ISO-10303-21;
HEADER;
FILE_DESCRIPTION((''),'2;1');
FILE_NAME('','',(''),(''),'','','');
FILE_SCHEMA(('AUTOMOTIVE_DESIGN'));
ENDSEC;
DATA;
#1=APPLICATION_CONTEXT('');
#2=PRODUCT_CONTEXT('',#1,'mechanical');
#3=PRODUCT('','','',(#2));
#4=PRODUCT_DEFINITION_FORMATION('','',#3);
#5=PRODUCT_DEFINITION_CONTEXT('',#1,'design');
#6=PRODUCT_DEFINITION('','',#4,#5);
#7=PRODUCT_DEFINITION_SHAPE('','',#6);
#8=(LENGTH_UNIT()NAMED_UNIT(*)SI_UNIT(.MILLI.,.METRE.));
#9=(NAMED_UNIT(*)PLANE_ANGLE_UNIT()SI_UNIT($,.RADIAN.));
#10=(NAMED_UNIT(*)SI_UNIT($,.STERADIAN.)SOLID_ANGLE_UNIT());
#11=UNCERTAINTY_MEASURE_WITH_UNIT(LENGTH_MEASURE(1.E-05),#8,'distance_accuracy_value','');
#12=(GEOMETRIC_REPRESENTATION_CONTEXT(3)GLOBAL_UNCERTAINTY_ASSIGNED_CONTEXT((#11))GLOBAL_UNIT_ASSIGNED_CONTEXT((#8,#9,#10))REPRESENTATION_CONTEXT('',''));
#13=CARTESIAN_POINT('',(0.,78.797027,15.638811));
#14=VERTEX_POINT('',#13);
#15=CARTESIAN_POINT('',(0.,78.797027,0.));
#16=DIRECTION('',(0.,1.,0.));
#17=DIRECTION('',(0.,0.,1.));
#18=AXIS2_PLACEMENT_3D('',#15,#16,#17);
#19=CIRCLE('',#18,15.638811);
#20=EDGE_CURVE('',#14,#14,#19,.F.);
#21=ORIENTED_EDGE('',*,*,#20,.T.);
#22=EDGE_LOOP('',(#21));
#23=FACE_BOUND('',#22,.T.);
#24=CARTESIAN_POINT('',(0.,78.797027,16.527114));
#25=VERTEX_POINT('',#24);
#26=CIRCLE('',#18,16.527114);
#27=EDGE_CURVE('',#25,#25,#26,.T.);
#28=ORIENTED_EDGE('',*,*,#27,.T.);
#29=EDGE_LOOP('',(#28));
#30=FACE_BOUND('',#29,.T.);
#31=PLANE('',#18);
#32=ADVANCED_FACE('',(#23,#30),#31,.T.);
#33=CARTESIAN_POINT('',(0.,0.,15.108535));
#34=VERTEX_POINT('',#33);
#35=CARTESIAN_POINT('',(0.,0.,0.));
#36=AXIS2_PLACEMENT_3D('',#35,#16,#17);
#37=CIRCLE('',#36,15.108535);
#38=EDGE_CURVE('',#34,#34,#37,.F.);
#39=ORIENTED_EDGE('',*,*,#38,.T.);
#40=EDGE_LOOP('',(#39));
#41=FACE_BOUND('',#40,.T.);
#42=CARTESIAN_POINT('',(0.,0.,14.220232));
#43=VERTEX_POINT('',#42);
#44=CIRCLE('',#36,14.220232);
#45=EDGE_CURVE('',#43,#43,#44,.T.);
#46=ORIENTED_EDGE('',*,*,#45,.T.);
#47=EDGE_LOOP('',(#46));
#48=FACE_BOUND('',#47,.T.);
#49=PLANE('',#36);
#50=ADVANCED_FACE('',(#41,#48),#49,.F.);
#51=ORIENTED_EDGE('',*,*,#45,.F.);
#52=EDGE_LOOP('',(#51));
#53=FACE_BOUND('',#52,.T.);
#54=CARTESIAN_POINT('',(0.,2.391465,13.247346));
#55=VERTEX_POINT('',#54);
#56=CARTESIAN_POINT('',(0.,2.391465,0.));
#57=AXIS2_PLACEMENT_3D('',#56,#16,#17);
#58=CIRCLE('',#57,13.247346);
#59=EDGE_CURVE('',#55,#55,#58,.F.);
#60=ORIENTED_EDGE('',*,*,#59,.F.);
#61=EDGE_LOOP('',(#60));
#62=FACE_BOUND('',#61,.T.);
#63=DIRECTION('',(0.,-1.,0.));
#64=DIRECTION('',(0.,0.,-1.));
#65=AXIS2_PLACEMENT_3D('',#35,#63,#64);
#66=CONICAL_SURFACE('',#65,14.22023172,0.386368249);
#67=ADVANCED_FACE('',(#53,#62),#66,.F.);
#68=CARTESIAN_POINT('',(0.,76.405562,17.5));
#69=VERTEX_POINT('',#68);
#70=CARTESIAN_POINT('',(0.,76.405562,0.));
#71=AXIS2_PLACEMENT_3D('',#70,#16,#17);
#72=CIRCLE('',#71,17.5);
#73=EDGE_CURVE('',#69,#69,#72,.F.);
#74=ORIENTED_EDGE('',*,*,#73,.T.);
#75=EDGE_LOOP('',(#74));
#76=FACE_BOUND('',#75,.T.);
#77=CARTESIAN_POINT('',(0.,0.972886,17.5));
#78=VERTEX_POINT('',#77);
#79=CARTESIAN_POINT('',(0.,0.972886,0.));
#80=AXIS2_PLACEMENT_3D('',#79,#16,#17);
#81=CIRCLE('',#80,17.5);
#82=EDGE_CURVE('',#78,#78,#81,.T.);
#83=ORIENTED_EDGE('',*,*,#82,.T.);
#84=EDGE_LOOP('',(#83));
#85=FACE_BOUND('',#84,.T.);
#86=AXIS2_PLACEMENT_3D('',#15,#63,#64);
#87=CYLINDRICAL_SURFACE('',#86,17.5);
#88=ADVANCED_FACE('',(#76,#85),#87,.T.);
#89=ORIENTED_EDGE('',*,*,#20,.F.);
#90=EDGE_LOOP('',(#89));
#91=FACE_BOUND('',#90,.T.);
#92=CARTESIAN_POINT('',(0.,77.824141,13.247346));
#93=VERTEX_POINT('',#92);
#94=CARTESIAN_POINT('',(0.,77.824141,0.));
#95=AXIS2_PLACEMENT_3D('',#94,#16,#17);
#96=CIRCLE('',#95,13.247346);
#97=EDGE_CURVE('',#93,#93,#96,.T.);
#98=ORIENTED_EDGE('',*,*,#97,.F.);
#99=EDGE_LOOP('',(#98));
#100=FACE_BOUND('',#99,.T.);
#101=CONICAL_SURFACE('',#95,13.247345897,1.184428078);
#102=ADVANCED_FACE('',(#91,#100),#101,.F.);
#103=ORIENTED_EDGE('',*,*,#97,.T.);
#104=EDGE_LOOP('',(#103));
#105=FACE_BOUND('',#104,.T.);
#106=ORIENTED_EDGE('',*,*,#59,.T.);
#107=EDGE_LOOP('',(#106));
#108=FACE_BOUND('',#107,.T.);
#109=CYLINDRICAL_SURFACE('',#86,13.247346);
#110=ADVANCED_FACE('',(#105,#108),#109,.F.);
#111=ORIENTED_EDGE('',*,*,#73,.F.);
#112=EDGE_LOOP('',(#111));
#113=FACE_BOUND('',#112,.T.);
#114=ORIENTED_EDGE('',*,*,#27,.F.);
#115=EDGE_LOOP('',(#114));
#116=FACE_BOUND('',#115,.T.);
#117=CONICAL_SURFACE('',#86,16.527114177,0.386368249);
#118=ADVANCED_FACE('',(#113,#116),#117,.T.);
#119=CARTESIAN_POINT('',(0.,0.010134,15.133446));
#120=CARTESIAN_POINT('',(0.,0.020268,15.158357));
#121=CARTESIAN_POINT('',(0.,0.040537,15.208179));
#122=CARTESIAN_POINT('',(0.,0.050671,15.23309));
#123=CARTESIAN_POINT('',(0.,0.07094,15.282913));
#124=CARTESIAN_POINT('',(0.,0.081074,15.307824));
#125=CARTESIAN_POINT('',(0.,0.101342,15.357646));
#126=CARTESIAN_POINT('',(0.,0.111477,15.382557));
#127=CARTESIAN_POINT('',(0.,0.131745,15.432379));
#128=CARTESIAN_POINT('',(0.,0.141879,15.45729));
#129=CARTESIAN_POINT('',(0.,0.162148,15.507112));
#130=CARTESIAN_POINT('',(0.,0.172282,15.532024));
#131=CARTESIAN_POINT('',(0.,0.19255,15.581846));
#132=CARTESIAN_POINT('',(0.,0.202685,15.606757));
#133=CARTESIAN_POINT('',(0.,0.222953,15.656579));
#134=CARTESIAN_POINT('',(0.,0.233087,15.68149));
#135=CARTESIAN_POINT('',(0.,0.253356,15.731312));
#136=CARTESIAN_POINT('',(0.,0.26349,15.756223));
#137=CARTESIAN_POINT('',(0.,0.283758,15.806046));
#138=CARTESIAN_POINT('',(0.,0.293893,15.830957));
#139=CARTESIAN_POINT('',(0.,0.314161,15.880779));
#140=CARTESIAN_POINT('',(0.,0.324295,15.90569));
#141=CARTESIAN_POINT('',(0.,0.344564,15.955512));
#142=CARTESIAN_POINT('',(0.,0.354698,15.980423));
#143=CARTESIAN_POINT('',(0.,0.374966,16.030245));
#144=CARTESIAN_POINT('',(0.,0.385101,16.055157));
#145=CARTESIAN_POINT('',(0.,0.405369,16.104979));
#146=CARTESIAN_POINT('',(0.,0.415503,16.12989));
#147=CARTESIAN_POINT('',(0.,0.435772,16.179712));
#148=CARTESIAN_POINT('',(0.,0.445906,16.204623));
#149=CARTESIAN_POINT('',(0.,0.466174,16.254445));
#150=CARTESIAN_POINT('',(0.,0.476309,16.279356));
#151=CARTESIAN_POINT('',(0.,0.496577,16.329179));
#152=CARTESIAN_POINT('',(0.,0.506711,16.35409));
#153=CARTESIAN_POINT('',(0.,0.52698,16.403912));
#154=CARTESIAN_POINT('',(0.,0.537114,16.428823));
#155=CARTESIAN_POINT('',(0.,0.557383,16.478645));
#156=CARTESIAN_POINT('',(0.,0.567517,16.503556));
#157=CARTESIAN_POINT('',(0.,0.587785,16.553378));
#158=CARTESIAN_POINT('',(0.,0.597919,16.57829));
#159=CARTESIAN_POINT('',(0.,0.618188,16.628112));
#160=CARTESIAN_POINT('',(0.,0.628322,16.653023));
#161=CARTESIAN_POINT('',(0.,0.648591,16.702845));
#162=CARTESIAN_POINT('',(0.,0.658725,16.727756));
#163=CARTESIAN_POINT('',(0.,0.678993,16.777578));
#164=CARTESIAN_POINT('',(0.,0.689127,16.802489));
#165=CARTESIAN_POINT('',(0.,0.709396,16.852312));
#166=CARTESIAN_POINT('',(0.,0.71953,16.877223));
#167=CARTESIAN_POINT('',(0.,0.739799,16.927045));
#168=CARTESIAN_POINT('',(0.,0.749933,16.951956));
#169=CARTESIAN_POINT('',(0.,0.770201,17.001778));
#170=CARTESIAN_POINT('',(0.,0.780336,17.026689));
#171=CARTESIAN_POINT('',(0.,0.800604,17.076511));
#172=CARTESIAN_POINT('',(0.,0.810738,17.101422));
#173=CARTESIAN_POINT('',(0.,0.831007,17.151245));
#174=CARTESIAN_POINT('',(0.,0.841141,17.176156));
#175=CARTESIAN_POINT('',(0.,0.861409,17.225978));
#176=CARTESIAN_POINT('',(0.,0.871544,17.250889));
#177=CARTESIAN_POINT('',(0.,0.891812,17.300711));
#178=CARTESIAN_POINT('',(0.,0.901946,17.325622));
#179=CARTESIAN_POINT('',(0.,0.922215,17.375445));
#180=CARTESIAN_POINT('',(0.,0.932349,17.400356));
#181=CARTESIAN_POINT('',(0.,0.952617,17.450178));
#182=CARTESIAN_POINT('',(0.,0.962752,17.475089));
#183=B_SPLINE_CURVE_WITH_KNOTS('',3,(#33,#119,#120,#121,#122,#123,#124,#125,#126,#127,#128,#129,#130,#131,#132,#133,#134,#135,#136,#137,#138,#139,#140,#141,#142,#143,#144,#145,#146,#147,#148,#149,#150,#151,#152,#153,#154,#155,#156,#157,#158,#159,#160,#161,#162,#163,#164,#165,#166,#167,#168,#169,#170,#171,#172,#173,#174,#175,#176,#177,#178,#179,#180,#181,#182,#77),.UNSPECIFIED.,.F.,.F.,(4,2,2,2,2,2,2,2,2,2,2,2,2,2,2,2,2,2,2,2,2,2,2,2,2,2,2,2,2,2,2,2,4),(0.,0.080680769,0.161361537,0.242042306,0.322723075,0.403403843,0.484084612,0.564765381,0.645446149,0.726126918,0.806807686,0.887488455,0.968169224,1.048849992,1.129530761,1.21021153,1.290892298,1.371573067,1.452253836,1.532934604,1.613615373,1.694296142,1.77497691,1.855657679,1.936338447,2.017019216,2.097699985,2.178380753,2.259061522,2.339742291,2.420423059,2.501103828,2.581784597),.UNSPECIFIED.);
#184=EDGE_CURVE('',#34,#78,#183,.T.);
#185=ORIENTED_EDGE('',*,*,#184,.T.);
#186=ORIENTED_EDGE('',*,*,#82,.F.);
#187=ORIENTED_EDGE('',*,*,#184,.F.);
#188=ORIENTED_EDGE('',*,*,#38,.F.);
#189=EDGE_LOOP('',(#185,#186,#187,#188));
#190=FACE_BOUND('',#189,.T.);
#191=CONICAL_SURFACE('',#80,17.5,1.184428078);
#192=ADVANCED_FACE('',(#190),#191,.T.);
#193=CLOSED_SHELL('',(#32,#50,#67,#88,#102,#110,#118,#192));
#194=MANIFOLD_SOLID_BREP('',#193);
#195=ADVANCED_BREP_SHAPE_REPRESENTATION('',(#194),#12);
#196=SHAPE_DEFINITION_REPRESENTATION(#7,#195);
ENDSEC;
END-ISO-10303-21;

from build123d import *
from OCP.BRepFilletAPI import BRepFilletAPI_MakeChamfer

# Parameters (mm, degrees)
SKETCH1_R           = 17.5
BOSS_EXTRUDE1_DEPTH = 78.797027268
SKETCH2_R           = 13.247345897
CUT_EXTRUDE1_DEPTH  = 83.592200033
CHAMFER1_SIZE       = 2.391465007
CHAMFER1_SIZE2      = 0.972885823


with BuildPart() as part:
    # Sketch1 → Boss-Extrude1 (new body)
    with BuildSketch(Plane(origin=(0, 0, 0), x_dir=(1, 0, 0), z_dir=(0, 1, 0))):
        Circle(SKETCH1_R)
    extrude(amount=BOSS_EXTRUDE1_DEPTH)

    # Sketch2 → Cut-Extrude1 (cut, through all)
    with BuildSketch(Plane(origin=(0, 0, 0), x_dir=(1, 0, 0), z_dir=(0, 1, 0))):
        Circle(SKETCH2_R)
    extrude(amount=CUT_EXTRUDE1_DEPTH, mode=Mode.SUBTRACT)

    # Chamfer1: one chamfer whose edges measure the first distance from different faces: ONE call of the kernel's chamfer builder (chamfer() names one face for all edges)
    chamfer1_edges_1 = [part.edges().sort_by_distance(p)[0] for p in [
        (-13.247345897, 78.797027268, 0),
    ]]
    chamfer1_side_1 = [part.faces().sort_by_distance(p)[0] for p in [
        (-17.005025253, 78.797027268, 0),
    ]]
    chamfer1_edges_2 = [part.edges().sort_by_distance(p)[0] for p in [
        (-13.247345897, 0, 0),
    ]]
    chamfer1_side_2 = [part.faces().sort_by_distance(p)[0] for p in [
        (-13.247345897, 39.398513634, 0),
    ]]
    chamfer1_edges_3 = [part.edges().sort_by_distance(p)[0] for p in [
        (-17.5, 0, 0),
    ]]
    chamfer1_side_3 = [part.faces().sort_by_distance(p)[0] for p in [
        (-17.005025253, 0, 0),
    ]]
    chamfer1_edges_4 = [part.edges().sort_by_distance(p)[0] for p in [
        (-17.5, 78.797027268, 0),
    ]]
    chamfer1_side_4 = [part.faces().sort_by_distance(p)[0] for p in [
        (-17.5, 39.398513634, 0),
    ]]
    chamfer1 = BRepFilletAPI_MakeChamfer(part.part.solid().wrapped)
    for e in chamfer1_edges_1:
        chamfer1.Add(CHAMFER1_SIZE, CHAMFER1_SIZE2, e.wrapped, chamfer1_side_1[0].wrapped)  # the first distance lies on this face
    for e in chamfer1_edges_2:
        chamfer1.Add(CHAMFER1_SIZE, CHAMFER1_SIZE2, e.wrapped, chamfer1_side_2[0].wrapped)  # the first distance lies on this face
    for e in chamfer1_edges_3:
        chamfer1.Add(CHAMFER1_SIZE, CHAMFER1_SIZE2, e.wrapped, chamfer1_side_3[0].wrapped)  # the first distance lies on this face
    for e in chamfer1_edges_4:
        chamfer1.Add(CHAMFER1_SIZE, CHAMFER1_SIZE2, e.wrapped, chamfer1_side_4[0].wrapped)  # the first distance lies on this face
    add(Compound.cast(chamfer1.Shape()), mode=Mode.REPLACE)


solid = part.part
